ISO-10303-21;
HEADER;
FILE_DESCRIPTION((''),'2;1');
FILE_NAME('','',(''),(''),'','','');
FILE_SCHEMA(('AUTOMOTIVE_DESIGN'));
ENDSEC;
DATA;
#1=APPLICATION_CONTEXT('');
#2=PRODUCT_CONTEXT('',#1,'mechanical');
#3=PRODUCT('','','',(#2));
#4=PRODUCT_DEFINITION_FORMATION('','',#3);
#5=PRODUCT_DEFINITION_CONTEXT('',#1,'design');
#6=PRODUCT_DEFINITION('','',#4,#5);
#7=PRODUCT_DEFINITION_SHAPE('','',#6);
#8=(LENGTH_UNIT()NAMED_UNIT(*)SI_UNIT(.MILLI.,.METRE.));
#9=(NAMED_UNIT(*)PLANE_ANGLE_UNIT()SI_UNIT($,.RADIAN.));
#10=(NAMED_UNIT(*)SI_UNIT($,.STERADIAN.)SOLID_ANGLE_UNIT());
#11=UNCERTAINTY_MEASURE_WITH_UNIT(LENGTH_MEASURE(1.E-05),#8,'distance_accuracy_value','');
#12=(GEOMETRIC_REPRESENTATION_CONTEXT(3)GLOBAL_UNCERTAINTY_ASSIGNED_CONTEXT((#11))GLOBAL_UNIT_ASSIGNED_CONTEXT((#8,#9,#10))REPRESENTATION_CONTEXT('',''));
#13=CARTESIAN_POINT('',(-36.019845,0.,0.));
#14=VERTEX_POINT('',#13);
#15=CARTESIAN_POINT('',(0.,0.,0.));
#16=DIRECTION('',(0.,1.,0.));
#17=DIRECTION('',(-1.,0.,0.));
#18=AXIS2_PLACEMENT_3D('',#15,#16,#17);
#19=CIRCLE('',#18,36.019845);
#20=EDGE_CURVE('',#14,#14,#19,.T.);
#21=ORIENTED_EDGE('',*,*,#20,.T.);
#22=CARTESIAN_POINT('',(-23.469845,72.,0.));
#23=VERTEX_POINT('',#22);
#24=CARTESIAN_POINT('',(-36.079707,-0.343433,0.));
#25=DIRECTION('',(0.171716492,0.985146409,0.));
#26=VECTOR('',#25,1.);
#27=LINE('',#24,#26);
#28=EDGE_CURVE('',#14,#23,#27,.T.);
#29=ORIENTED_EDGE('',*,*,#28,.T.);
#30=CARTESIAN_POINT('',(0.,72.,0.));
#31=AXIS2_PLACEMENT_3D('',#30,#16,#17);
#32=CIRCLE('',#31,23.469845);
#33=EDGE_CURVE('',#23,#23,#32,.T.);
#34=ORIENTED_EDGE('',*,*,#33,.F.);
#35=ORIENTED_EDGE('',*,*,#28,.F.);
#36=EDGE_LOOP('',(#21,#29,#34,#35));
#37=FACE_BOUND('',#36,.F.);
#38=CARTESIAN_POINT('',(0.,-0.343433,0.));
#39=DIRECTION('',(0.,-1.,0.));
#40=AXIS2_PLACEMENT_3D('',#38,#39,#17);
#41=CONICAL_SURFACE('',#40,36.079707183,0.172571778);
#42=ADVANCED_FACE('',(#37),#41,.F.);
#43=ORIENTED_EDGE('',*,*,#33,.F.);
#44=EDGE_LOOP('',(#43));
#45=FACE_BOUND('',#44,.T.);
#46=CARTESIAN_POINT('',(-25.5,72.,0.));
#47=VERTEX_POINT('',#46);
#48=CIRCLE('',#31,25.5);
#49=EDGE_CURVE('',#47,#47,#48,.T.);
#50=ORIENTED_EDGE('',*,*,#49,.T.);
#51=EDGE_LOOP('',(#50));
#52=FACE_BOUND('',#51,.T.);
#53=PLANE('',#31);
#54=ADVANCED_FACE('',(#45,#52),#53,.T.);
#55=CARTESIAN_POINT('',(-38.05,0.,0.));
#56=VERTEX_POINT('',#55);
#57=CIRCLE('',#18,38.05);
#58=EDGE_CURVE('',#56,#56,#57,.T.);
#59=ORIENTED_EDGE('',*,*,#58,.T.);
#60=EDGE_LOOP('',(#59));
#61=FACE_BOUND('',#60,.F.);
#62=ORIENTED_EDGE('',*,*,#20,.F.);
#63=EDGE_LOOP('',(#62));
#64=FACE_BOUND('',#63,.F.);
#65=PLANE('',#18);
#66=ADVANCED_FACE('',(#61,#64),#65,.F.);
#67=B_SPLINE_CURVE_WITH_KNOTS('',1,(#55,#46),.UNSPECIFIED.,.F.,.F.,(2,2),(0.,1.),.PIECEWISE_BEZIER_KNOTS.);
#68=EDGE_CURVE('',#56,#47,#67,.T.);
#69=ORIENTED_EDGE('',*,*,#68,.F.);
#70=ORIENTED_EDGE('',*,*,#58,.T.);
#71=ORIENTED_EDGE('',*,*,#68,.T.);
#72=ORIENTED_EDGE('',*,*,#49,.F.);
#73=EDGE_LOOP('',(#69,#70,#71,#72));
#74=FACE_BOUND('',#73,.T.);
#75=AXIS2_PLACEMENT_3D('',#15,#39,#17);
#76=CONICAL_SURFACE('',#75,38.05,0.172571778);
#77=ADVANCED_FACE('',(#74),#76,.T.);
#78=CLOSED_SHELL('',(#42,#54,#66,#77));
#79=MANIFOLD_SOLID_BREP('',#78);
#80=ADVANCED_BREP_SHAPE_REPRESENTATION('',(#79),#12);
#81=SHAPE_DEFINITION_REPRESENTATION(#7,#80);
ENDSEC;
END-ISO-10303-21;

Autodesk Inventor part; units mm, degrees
ref_plane "YZ Plane" through (0, 0, 0) normal (1, 0, 0) x (0, 1, 0)
ref_plane "XY Plane" through (0, 0, 0) normal (0, 0, 1) x (1, 0, 0)
sketch "Szkic6" plane through (0, 0, 0) normal (0, 1, 0) x (-1, 0, 0)
  circle A0 centre (0, 0) radius 38.05
  dimension "d33" = 76.1
ref_plane "Płaszczyzna konstrukcyjna1" through (0, 72, 0) normal (0, 1, 0) x (-1, 0, 0)
sketch "Szkic7" plane through (0, 72, 0) normal (0, 1, 0) x (-1, 0, 0)
  circle A0 centre (0, 0) radius 25.5
  dimension "d35" = 51
loft "Wyciągnięcie złożone1" add profiles "Szkic6", "Szkic7"
shell "Skorupa1" thickness 2 removed faces 2 at (4.5479, 72, -4.6843) at (-5.8996, 0, 7.9079)
equation "\"d33\" = OD1"
equation "\"d35\" = OD2"
equation "\"d52\" = THK"
equation "\"SzerokośćGięciaPodcięcia\" = Grubość"
equation "\"RozmiarPodcięciaNarożnika\" = 4 * Grubość"
equation "\"PromieńPrzejścia\" = PromieńGięcia"
equation "\"Rozmiar_promienia_Jacobiego\" = PromieńGięcia"
equation "\"Wielk_odstępu\" = Grubość"
equation "\"d2\" = PromieńGięcia"
equation "\"d23\" = PromieńGięcia"
equation "\"OD1\" = 76.1"
equation "\"OD2\" = 51"
equation "\"L\" = 72"
equation "\"THK\" = 2"
equation "\"d34\" = L"
equation "\"Grubość\" = 1.5"
equation "\"PromieńGięcia\" = 3"
properties part number "Redukcja symetryczna Ø76,1x51x2 L=72" material "304"
